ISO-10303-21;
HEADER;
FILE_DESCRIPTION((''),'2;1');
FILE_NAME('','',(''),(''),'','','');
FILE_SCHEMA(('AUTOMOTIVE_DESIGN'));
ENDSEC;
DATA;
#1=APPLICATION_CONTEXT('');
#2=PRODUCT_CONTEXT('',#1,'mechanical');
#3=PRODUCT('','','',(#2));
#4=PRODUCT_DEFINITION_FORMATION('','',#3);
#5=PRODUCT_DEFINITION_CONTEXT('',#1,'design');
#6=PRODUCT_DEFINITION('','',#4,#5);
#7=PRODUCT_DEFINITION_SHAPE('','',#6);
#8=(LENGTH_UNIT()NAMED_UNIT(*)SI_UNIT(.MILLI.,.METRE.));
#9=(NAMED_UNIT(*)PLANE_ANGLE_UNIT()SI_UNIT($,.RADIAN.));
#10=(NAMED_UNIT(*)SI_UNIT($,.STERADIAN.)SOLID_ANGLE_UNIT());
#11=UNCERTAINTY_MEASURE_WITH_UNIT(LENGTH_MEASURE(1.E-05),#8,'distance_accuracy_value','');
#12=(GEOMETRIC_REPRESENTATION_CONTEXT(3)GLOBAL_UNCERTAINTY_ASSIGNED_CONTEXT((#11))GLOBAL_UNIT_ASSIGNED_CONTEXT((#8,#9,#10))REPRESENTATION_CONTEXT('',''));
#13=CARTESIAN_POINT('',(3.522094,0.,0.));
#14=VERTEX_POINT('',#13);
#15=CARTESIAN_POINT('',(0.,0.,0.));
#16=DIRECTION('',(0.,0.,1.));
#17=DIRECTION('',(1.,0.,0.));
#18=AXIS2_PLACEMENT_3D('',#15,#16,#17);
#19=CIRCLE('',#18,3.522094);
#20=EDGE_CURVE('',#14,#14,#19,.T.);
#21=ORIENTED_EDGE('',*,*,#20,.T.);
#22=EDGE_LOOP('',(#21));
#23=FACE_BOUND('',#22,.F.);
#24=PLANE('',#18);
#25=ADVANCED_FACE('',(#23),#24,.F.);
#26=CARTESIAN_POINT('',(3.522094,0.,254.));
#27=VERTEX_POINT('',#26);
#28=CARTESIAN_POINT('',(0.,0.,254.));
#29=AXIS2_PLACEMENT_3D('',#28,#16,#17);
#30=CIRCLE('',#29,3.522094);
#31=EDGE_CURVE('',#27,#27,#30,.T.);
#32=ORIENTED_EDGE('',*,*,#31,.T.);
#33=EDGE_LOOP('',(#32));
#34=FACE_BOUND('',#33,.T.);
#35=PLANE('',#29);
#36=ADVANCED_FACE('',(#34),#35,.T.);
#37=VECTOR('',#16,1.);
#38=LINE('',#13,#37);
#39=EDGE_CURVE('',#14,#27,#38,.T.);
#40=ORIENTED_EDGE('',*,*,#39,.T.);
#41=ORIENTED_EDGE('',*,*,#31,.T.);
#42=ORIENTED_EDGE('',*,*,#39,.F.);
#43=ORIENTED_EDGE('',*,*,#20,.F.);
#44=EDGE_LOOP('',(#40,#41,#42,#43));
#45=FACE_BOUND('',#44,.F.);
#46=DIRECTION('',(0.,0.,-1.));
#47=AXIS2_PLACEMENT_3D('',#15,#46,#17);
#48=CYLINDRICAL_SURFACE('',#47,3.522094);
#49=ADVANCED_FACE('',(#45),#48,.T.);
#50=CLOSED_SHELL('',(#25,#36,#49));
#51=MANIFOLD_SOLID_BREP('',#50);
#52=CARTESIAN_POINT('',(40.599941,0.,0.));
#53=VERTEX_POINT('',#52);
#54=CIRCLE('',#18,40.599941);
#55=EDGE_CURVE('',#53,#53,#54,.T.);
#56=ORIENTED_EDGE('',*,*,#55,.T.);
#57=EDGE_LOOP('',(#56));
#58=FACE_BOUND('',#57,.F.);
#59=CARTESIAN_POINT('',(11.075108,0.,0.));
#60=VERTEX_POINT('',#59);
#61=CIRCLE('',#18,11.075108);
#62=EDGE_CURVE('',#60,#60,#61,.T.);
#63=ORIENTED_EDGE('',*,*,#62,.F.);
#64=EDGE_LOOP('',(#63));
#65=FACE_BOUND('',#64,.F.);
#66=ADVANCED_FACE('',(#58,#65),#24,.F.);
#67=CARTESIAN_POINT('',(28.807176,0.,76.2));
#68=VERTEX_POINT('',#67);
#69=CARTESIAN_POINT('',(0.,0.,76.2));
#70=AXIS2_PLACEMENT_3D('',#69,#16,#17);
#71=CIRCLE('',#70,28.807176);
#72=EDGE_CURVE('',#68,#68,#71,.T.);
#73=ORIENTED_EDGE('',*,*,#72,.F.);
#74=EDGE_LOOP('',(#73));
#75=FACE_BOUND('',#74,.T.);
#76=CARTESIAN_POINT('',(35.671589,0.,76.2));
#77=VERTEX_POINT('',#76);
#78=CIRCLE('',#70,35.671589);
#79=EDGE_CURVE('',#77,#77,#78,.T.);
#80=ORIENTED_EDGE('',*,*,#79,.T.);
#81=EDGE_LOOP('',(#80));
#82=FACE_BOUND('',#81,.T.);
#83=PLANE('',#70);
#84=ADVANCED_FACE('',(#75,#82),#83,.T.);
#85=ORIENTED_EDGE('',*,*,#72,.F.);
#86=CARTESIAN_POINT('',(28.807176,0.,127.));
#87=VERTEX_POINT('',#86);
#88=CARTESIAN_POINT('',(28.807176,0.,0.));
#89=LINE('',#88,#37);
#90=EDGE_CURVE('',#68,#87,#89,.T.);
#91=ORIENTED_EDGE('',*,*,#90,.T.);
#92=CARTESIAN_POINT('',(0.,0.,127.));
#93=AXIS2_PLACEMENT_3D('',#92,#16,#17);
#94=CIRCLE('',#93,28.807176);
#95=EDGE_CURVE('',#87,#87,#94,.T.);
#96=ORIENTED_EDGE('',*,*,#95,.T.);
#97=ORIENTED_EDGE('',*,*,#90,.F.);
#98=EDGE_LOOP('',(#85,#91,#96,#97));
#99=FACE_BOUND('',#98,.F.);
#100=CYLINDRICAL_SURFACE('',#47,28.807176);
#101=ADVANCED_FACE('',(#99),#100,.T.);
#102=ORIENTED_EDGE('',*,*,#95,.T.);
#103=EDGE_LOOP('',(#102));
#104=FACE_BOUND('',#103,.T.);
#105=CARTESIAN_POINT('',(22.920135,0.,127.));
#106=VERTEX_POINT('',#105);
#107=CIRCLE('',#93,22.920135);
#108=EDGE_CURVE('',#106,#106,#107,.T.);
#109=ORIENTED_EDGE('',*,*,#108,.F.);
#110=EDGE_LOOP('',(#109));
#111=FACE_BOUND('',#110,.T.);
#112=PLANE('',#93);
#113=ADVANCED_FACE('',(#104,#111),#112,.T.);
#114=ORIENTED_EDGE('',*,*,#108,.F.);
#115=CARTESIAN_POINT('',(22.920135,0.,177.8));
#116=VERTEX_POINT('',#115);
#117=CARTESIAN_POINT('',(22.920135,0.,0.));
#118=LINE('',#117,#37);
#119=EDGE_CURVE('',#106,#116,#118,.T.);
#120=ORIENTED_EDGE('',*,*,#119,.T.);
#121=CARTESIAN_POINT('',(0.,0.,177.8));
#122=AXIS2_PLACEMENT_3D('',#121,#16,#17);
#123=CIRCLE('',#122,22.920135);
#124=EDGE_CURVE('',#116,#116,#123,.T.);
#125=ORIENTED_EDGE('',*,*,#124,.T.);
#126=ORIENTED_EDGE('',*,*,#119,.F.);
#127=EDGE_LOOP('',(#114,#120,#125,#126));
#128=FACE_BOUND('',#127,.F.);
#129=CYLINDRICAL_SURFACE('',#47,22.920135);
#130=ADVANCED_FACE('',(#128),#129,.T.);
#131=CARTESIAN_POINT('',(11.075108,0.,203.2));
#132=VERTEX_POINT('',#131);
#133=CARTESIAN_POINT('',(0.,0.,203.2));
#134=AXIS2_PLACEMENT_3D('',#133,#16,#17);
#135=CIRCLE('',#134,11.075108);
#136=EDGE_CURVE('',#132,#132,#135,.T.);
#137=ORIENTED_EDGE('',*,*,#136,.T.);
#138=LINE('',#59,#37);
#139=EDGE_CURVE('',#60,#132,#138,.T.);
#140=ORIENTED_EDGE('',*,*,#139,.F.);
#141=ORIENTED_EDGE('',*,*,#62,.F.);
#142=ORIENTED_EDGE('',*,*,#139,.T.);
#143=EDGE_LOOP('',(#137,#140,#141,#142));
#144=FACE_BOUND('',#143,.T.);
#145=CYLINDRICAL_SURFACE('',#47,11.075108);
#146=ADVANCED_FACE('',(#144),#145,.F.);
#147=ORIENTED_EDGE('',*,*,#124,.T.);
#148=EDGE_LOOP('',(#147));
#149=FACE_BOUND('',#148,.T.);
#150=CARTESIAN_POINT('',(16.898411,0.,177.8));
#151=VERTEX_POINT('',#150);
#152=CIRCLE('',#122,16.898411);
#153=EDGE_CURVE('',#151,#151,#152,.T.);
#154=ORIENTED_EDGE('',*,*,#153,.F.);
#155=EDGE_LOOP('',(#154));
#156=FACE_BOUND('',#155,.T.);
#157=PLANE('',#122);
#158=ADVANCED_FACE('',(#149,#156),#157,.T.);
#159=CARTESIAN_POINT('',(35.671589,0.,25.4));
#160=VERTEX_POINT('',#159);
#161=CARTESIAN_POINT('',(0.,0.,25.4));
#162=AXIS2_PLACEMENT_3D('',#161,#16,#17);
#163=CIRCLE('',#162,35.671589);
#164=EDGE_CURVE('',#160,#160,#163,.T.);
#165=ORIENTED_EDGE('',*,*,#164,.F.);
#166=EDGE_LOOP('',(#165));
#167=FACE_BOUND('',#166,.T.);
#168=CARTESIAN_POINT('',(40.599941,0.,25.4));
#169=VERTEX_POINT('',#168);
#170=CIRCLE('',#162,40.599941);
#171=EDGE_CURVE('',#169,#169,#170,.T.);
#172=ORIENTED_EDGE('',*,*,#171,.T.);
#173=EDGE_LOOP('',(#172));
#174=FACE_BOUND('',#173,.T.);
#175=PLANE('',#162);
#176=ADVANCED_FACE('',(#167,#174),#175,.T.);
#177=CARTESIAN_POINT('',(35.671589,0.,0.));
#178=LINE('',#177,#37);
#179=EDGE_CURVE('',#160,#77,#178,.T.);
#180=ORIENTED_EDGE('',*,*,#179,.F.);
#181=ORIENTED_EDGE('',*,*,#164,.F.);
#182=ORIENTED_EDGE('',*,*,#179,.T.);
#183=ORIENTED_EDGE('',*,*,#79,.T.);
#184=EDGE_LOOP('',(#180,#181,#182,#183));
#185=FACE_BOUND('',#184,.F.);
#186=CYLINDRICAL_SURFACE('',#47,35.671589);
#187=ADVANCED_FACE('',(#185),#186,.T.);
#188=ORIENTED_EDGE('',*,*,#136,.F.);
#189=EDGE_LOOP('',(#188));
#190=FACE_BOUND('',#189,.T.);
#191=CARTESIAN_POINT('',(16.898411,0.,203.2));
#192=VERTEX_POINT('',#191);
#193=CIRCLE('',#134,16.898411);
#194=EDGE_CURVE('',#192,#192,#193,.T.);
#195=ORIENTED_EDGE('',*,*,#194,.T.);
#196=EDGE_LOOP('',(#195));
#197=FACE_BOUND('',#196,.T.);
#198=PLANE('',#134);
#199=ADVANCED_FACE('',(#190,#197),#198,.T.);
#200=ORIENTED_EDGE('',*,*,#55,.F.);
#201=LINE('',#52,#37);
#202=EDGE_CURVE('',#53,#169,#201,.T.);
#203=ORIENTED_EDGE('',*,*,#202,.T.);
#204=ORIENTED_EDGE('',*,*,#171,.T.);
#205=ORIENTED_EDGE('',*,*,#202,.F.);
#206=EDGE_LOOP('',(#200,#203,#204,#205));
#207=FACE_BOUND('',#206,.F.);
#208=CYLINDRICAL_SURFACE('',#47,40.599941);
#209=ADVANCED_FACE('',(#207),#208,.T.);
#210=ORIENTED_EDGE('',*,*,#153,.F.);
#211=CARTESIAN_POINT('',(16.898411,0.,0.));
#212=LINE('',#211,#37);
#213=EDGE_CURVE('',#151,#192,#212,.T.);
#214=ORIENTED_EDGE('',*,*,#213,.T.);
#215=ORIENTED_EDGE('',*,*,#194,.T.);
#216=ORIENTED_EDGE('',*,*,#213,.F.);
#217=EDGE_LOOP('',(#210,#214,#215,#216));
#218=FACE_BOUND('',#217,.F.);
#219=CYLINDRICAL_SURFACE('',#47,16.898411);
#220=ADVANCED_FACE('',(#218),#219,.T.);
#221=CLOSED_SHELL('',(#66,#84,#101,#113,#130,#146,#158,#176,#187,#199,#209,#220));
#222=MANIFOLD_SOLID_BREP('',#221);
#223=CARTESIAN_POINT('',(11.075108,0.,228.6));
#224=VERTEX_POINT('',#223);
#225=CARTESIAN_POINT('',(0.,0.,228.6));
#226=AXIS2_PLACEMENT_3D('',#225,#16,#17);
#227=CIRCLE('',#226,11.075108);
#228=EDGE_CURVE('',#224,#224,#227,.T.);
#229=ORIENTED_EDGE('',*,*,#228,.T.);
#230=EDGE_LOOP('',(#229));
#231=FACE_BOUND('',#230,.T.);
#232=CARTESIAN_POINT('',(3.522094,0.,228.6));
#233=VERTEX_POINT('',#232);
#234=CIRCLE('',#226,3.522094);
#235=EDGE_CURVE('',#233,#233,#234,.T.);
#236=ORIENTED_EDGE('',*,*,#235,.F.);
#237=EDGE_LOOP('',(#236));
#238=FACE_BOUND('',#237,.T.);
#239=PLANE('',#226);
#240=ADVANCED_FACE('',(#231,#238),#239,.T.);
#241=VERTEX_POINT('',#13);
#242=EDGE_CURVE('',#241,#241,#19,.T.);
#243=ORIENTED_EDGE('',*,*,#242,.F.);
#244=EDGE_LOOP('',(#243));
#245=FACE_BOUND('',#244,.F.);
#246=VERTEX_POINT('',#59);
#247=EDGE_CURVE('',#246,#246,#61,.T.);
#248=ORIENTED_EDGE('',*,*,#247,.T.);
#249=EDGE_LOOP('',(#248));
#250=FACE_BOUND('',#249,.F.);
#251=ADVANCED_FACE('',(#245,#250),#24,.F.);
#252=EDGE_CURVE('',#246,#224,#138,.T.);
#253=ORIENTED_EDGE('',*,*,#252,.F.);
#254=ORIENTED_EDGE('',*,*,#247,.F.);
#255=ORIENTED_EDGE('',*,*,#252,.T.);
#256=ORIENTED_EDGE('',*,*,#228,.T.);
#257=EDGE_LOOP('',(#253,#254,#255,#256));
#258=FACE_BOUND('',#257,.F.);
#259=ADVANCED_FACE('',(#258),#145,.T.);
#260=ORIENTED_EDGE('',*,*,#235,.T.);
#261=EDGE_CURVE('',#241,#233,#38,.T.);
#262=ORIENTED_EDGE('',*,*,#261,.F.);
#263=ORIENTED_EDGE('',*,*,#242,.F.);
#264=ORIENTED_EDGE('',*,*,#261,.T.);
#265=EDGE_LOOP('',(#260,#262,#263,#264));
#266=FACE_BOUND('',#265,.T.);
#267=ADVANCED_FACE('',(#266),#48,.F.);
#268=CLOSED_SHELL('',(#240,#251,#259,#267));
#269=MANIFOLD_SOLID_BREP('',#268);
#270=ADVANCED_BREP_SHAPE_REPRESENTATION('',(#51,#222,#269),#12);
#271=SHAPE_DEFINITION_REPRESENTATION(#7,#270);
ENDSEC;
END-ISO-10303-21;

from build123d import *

# Parameters (mm, degrees)
F0_R     = 3.522094475
F1_DEPTH = 254
F0_R_2   = 40.599940794
F0_R_3   = 35.6715893611
F2_DEPTH = 25.4
F0_R_4   = 28.8071763317
F3_DEPTH = 76.2
F0_R_5   = 22.9201353623
F4_DEPTH = 127
F0_R_6   = 16.8984108621
F5_DEPTH = 177.8
F0_R_7   = 11.0751082581
F6_DEPTH = 203.2
F7_DEPTH = 228.6


# Not quite as in the source:
# - the program builds the solid bodies; features that only make, move or delete a surface that nothing else refers to are left out


with BuildPart() as f1:
    # F0 (on Top) → F1 (new body)
    with BuildSketch(Plane.XY):
        Circle(F0_R)
    extrude(amount=F1_DEPTH)


with BuildPart() as f2:
    # F0 (on Top) → F2 (new body)
    with BuildSketch(Plane.XY):
        Circle(F0_R_2)
        Circle(F0_R_3, mode=Mode.SUBTRACT)
    extrude(amount=F2_DEPTH)

    # F0 (on Top) → F3 (join)
    with BuildSketch(Plane.XY):
        Circle(F0_R_3)
        Circle(F0_R_4, mode=Mode.SUBTRACT)
    extrude(amount=F3_DEPTH)

    # F0 (on Top) → F4 (join)
    with BuildSketch(Plane.XY):
        Circle(F0_R_4)
        Circle(F0_R_5, mode=Mode.SUBTRACT)
    extrude(amount=F4_DEPTH)

    # F0 (on Top) → F5 (join)
    with BuildSketch(Plane.XY):
        Circle(F0_R_5)
        Circle(F0_R_6, mode=Mode.SUBTRACT)
    extrude(amount=F5_DEPTH)

    # F0 (on Top) → F6 (join)
    with BuildSketch(Plane.XY):
        Circle(F0_R_6)
        Circle(F0_R_7, mode=Mode.SUBTRACT)
    extrude(amount=F6_DEPTH)


with BuildPart() as f7:
    # F0 (on Top) → F7 (new body)
    with BuildSketch(Plane.XY):
        Circle(F0_R_7)
        Circle(F0_R, mode=Mode.SUBTRACT)
    extrude(amount=F7_DEPTH)


solid = Compound([f1.part, f2.part, f7.part])
